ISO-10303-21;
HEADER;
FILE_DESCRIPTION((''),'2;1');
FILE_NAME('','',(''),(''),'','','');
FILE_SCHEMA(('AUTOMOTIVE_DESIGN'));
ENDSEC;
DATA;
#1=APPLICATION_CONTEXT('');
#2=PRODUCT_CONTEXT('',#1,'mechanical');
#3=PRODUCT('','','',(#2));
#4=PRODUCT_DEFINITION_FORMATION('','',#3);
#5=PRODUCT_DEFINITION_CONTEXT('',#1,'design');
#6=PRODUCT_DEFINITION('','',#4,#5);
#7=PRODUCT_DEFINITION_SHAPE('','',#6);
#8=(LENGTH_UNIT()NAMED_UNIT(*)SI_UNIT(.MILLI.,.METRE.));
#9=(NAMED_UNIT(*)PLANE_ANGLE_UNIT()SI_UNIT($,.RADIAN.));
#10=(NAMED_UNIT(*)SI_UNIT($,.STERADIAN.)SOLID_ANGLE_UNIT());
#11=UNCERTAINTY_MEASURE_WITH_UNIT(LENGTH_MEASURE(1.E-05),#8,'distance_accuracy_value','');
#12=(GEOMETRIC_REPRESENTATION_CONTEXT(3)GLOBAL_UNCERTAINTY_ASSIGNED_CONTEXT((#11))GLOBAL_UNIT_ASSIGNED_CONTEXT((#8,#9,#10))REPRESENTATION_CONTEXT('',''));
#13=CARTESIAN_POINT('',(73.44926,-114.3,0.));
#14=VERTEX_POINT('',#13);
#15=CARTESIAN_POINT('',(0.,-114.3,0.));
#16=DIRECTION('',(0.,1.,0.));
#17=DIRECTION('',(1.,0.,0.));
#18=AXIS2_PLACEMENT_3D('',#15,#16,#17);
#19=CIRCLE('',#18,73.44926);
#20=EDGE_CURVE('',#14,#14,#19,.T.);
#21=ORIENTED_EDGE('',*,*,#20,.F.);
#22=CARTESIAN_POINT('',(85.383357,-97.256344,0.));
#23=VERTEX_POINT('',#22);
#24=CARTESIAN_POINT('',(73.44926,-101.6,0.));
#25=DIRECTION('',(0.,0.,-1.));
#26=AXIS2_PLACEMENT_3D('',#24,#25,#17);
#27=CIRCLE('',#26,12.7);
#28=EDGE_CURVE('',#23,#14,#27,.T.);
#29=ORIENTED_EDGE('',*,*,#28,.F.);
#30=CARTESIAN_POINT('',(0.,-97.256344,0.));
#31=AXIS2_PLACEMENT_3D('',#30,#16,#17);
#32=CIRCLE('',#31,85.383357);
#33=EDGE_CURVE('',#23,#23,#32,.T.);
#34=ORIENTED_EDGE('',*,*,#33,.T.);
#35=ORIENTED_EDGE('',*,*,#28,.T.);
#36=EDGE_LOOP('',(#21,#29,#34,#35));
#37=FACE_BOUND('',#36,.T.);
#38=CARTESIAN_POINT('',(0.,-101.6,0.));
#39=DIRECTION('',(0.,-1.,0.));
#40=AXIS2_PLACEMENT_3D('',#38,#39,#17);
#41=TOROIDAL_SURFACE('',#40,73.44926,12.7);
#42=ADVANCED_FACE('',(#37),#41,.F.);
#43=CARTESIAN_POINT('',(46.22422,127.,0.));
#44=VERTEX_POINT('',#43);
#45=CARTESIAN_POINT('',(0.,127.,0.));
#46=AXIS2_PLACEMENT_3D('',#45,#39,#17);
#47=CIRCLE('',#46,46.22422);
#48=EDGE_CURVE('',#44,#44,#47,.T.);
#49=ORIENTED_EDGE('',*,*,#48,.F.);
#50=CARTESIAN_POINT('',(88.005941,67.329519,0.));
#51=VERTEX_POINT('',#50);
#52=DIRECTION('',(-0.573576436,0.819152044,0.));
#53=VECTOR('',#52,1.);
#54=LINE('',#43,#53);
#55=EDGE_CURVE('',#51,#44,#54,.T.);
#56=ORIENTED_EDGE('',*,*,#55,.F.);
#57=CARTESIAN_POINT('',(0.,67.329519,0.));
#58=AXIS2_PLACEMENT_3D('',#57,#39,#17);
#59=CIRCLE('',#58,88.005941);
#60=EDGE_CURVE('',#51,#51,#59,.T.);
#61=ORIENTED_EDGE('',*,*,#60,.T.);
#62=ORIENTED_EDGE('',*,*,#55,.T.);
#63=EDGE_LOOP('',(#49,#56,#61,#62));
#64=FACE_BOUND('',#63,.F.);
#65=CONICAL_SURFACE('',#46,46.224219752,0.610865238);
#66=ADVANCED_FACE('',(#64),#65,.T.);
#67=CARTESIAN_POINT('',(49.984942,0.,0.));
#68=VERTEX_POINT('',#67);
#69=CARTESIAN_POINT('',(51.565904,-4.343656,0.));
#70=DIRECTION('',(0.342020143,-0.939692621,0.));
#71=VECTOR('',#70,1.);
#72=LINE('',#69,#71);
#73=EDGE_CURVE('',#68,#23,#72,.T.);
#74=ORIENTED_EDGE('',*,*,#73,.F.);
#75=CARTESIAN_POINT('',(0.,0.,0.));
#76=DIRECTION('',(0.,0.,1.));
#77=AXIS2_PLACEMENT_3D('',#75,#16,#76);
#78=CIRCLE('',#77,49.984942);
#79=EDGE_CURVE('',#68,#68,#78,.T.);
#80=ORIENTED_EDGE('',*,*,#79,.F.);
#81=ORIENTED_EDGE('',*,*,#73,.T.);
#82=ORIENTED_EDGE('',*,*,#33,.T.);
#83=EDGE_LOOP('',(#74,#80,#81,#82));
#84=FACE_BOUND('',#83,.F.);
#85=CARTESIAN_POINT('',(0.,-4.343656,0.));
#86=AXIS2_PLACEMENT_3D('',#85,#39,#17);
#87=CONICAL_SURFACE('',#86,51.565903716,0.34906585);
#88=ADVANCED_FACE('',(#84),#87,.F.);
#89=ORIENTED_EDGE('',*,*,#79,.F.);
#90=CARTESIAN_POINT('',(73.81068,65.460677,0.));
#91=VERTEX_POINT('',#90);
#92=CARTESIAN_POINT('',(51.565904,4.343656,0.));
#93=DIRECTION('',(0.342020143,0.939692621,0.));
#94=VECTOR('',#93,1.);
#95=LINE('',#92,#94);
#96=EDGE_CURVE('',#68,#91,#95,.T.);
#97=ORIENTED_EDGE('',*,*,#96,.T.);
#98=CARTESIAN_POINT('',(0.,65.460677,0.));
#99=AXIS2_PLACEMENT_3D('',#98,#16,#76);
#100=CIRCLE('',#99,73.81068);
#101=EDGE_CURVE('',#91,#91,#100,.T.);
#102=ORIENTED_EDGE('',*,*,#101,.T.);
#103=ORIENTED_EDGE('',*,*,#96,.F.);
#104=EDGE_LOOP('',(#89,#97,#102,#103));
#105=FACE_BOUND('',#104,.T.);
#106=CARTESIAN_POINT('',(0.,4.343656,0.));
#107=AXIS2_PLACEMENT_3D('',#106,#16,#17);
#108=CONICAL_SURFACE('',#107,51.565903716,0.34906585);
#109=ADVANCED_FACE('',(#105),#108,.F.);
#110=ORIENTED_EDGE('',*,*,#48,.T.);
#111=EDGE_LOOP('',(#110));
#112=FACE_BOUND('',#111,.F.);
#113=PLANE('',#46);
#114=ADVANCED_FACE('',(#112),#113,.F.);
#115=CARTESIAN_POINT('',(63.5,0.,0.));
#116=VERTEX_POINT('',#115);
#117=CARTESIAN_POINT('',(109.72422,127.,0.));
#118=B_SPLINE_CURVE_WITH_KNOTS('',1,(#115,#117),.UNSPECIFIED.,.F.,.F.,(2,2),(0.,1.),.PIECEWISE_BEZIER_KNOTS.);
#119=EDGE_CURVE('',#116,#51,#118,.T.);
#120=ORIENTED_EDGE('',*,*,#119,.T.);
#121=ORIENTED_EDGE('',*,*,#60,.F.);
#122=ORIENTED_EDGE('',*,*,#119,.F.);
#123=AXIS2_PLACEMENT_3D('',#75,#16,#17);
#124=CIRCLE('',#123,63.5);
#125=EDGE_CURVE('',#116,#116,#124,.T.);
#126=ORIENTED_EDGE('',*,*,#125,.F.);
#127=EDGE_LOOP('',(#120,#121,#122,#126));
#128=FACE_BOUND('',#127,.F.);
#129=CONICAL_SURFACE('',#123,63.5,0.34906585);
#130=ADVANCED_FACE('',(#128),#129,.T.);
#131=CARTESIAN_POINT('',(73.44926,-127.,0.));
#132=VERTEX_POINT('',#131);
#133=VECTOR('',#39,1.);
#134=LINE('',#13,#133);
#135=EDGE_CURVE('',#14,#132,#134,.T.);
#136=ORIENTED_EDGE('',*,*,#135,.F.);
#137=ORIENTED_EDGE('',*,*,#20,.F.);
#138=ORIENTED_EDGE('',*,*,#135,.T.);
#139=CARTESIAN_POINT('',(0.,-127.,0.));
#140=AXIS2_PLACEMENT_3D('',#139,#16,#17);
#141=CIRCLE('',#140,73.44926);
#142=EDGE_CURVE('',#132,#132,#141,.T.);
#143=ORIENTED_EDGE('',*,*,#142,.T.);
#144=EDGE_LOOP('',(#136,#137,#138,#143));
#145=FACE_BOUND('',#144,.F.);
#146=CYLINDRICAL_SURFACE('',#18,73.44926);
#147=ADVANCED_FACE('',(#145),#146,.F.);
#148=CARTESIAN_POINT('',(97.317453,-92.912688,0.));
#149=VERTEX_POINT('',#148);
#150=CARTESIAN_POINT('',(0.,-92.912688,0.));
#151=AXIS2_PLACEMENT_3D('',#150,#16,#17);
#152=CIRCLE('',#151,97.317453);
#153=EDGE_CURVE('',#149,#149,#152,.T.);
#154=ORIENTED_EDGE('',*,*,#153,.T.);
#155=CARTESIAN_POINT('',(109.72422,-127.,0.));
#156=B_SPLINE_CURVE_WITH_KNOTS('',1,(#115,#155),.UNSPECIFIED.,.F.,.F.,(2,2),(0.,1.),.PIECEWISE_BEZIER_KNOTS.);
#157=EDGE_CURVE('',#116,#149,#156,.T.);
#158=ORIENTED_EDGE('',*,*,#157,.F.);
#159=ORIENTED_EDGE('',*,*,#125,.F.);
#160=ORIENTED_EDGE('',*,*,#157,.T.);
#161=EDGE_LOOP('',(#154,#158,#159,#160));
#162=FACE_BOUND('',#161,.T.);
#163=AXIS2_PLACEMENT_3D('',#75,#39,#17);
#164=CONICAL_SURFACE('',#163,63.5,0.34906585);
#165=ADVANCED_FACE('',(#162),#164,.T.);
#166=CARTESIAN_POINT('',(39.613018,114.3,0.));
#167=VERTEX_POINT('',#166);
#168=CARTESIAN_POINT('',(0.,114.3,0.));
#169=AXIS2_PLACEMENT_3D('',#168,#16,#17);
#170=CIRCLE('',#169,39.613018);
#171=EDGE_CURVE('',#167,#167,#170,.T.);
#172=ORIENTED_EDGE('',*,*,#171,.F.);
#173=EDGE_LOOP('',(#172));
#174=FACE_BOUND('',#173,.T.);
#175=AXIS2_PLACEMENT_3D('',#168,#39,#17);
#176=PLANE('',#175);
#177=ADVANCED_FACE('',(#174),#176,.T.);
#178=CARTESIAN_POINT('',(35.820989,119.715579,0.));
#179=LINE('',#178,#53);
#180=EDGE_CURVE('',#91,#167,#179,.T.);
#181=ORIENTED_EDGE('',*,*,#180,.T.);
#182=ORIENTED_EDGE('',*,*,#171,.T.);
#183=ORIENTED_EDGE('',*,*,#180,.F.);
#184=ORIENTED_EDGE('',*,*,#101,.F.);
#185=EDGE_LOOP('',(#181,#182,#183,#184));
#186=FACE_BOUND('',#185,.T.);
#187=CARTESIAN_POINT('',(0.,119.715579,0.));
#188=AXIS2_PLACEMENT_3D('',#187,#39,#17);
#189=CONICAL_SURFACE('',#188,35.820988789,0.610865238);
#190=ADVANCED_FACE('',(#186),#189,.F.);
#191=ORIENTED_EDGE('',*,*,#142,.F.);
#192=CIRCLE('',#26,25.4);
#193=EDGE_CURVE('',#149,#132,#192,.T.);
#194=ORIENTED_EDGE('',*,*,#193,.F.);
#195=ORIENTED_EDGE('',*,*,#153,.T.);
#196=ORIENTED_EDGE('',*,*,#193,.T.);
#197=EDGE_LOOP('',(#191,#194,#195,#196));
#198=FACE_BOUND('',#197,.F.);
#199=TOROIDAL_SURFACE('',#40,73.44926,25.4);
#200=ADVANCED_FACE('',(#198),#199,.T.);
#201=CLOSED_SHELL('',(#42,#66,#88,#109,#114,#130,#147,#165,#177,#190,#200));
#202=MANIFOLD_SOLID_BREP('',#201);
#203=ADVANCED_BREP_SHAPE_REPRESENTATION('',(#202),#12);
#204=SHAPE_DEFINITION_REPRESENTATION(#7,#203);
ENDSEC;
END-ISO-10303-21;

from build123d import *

# Parameters (mm, degrees)
F0_R     = 63.5
F1_DEPTH = 127
F1_TAPER = -20
F2_R     = 25.4
F3_SIZE  = 63.5
F4_T     = -12.7


# Not quite as in the source:
# - a shell that OpenCascade refuses in one call is made with other operations: the cavity is built on its own and cut out


with BuildPart() as f1:
    # F0 (on Front) → F1 (new body, symmetric)
    with BuildSketch(Plane.XZ):
        Circle(F0_R)
    extrude(amount=F1_DEPTH, both=True, taper=F1_TAPER)

    # F2
    f2_edges = [f1.edges().sort_by_distance(p)[0] for p in [
        (-109.72422, -127, 0),
    ]]
    fillet(f2_edges, radius=F2_R)

    # F3
    f3_edges = [f1.edges().sort_by_distance(p)[0] for p in [
        (-109.72422, 127, 0),
    ]]
    chamfer(f3_edges, length=F3_SIZE)

    # F4: a shell. OpenCascade refuses it in one call, so the cavity is built on its own and cut out:
    # the body offset inwards by the wall thickness, plus a prism from it out through each open face.
    f4_core = offset(f1.part, amount=F4_T, kind=Kind.INTERSECTION, mode=Mode.PRIVATE)
    f4_exits = [f4_core.faces().sort_by_distance(p)[0] for p in [
        (0, -114.3, 0),
    ]]
    add(f4_core, mode=Mode.SUBTRACT)
    extrude(f4_exits, amount=-F4_T, mode=Mode.SUBTRACT)


solid = f1.part
